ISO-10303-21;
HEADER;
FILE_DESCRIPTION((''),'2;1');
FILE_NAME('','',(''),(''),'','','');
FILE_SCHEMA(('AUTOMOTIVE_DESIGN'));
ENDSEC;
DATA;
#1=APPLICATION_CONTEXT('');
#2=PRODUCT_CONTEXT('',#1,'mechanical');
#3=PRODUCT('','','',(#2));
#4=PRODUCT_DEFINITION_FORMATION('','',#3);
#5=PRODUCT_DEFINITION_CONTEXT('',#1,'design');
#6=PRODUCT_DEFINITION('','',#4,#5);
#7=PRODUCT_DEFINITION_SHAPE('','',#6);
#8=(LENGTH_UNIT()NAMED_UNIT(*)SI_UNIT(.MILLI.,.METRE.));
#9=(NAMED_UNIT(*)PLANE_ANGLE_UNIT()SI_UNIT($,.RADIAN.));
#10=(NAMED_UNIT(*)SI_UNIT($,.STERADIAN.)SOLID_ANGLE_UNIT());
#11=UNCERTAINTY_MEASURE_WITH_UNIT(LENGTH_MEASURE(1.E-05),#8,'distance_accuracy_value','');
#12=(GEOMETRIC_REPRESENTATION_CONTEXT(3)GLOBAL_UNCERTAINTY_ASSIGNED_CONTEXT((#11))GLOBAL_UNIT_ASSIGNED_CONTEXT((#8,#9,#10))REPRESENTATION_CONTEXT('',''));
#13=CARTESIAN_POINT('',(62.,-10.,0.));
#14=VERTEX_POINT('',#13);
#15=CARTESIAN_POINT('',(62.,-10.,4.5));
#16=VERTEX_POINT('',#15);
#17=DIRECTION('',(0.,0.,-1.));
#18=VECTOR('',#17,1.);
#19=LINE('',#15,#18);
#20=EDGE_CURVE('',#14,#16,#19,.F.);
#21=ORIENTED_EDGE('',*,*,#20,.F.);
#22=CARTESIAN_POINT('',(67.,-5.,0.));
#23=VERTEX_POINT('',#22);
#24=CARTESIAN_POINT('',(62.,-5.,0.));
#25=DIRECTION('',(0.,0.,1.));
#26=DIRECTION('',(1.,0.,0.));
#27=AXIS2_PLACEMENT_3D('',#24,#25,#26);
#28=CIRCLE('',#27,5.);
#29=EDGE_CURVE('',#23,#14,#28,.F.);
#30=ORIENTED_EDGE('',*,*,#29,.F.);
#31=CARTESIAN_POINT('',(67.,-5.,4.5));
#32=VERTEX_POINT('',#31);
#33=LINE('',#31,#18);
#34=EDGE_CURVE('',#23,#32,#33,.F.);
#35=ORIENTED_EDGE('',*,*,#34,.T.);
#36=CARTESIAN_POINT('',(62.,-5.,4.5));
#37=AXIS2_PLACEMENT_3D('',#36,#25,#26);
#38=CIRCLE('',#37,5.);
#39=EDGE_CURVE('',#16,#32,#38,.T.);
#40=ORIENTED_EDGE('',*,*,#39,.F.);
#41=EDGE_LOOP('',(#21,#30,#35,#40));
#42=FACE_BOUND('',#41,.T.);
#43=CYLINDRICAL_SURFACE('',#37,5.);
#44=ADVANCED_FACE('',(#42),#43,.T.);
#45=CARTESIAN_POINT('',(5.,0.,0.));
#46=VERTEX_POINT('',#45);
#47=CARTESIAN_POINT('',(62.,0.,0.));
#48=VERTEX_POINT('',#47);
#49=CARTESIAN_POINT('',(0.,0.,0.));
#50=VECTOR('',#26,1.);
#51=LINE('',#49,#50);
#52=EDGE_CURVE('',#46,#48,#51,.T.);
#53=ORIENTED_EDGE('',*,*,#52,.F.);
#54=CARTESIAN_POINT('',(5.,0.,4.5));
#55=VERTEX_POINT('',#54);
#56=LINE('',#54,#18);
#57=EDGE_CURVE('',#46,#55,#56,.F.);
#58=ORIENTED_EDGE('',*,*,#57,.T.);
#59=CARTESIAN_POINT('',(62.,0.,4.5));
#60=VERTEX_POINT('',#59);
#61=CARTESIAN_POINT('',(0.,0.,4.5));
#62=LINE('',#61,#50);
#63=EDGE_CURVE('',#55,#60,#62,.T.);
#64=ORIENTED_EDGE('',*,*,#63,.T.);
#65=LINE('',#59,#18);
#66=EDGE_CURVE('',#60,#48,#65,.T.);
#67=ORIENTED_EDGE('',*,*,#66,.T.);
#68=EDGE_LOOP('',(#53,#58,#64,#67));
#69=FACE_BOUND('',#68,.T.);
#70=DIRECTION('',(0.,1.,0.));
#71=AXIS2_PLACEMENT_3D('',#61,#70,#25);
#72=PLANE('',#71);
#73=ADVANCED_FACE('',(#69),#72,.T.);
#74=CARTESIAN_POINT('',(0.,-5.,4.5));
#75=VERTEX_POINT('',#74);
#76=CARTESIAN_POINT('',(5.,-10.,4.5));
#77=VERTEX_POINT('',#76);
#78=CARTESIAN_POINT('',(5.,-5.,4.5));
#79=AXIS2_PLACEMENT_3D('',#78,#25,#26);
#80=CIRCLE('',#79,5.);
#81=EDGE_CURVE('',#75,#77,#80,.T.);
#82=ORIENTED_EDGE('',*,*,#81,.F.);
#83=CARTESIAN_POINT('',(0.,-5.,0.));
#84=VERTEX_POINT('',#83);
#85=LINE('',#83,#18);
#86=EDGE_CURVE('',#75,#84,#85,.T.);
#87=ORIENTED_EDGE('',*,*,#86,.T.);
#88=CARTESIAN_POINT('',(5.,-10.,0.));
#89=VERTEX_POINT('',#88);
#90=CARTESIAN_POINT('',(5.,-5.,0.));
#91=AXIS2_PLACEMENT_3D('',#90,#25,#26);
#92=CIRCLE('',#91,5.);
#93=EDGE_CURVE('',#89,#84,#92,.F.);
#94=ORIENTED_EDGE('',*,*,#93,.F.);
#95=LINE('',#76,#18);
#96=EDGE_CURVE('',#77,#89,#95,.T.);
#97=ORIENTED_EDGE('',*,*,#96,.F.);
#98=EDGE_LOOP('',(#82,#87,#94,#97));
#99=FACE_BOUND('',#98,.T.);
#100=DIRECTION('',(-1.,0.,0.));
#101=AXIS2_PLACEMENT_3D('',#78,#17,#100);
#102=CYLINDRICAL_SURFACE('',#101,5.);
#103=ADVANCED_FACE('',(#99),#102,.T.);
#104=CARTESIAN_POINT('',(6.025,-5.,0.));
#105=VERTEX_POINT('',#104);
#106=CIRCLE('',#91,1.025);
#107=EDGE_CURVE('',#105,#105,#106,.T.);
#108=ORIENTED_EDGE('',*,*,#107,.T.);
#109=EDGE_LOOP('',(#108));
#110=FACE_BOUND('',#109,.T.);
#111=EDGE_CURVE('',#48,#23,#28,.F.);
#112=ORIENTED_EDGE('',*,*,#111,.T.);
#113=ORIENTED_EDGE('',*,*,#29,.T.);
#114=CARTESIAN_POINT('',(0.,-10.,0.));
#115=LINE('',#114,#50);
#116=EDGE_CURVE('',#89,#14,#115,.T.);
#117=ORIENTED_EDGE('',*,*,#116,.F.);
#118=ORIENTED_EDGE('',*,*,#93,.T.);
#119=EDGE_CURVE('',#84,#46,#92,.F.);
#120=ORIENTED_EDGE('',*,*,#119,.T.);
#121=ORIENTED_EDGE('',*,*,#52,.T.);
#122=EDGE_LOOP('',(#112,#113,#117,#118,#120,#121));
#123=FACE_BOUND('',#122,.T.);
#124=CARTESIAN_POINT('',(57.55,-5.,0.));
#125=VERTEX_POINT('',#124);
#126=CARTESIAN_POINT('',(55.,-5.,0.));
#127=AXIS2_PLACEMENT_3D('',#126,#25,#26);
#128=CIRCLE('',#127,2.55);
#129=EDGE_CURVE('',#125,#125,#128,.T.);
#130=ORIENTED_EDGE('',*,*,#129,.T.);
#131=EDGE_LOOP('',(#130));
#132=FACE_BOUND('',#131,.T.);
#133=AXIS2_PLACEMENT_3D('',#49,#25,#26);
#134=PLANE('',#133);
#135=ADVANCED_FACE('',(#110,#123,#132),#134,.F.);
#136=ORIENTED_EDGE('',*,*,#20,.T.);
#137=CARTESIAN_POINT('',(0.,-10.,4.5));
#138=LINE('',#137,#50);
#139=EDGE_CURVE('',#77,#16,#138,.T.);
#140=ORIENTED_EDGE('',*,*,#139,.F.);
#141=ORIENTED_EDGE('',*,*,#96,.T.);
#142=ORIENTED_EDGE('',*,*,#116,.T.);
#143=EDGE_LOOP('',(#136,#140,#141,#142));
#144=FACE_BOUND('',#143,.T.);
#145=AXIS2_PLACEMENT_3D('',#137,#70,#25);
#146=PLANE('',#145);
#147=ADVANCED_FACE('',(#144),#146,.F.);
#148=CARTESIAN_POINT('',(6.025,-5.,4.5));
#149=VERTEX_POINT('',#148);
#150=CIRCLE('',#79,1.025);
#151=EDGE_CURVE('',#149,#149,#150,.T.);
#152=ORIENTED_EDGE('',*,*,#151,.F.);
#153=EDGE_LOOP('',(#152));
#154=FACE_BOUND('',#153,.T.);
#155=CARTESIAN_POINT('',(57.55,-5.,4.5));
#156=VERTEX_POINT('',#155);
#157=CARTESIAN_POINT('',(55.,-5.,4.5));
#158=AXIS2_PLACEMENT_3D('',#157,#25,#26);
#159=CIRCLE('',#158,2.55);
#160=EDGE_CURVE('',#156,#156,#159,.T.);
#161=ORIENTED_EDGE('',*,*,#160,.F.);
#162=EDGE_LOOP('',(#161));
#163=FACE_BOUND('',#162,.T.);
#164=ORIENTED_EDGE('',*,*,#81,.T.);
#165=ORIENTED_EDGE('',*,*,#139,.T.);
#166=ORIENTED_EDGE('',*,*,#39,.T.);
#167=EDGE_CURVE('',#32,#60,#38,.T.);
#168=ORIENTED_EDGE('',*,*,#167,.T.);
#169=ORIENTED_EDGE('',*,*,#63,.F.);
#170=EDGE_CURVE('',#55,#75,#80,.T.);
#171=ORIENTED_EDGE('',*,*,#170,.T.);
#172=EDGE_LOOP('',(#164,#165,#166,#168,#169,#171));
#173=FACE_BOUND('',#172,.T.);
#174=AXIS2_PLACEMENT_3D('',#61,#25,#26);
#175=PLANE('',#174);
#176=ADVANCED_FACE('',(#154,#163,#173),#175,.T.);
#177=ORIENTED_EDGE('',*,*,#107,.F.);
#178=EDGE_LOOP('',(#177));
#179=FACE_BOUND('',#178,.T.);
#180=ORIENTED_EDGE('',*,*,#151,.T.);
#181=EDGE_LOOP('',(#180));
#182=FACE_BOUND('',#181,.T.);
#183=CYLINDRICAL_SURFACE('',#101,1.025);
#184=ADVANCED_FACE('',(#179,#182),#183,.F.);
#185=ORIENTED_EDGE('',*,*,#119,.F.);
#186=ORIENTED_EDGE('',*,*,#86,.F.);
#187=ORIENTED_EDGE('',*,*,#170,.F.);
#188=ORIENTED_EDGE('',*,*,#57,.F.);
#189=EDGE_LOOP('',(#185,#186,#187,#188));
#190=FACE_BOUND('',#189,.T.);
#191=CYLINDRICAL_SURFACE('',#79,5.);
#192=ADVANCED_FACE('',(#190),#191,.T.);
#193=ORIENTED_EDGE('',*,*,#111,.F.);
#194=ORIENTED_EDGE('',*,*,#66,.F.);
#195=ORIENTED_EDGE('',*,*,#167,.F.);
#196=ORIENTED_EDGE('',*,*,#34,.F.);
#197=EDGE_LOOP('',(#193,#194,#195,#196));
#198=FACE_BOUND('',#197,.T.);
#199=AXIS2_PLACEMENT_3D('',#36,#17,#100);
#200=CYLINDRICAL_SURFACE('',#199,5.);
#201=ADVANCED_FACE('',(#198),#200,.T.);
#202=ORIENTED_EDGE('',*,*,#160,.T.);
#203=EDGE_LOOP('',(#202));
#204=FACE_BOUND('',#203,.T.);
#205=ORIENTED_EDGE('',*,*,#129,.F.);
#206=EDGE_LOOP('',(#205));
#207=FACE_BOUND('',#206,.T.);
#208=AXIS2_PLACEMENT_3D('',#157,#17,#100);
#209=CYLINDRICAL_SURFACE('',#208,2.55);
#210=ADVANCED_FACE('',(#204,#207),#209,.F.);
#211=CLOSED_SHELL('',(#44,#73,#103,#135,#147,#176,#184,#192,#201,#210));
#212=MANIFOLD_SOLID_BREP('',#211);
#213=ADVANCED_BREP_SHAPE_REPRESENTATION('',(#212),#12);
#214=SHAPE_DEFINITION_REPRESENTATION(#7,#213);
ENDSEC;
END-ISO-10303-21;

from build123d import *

# Parameters (mm, degrees)
SKETCH_1_W      = 67
SKETCH_1_H      = 10
SKETCH_1_R      = 1.025
SKETCH_1_R_2    = 2.55
EXTRUDE_1_DEPTH = 4.5
FILLET_1_R      = 5


with BuildPart() as part:
    # 草图1 → 凸台-拉伸1 (new body)
    with BuildSketch(Plane.XY):
        with Locations((33.5, -5)):
            Rectangle(SKETCH_1_W, SKETCH_1_H)
        with Locations((5, -5)):
            Circle(SKETCH_1_R, mode=Mode.SUBTRACT)
        with Locations((55, -5)):
            Circle(SKETCH_1_R_2, mode=Mode.SUBTRACT)
    extrude(amount=EXTRUDE_1_DEPTH)

    # 圆角1
    fillet_1_edges = [part.edges().sort_by_distance(p)[0] for p in [
        (0, -10, 2.25),
        (67, -10, 2.25),
        (67, 0, 2.25),
        (0, 0, 2.25),
    ]]
    fillet(fillet_1_edges, radius=FILLET_1_R - 0.0001)  # a hair under: the kernel refuses the full size


solid = part.part
